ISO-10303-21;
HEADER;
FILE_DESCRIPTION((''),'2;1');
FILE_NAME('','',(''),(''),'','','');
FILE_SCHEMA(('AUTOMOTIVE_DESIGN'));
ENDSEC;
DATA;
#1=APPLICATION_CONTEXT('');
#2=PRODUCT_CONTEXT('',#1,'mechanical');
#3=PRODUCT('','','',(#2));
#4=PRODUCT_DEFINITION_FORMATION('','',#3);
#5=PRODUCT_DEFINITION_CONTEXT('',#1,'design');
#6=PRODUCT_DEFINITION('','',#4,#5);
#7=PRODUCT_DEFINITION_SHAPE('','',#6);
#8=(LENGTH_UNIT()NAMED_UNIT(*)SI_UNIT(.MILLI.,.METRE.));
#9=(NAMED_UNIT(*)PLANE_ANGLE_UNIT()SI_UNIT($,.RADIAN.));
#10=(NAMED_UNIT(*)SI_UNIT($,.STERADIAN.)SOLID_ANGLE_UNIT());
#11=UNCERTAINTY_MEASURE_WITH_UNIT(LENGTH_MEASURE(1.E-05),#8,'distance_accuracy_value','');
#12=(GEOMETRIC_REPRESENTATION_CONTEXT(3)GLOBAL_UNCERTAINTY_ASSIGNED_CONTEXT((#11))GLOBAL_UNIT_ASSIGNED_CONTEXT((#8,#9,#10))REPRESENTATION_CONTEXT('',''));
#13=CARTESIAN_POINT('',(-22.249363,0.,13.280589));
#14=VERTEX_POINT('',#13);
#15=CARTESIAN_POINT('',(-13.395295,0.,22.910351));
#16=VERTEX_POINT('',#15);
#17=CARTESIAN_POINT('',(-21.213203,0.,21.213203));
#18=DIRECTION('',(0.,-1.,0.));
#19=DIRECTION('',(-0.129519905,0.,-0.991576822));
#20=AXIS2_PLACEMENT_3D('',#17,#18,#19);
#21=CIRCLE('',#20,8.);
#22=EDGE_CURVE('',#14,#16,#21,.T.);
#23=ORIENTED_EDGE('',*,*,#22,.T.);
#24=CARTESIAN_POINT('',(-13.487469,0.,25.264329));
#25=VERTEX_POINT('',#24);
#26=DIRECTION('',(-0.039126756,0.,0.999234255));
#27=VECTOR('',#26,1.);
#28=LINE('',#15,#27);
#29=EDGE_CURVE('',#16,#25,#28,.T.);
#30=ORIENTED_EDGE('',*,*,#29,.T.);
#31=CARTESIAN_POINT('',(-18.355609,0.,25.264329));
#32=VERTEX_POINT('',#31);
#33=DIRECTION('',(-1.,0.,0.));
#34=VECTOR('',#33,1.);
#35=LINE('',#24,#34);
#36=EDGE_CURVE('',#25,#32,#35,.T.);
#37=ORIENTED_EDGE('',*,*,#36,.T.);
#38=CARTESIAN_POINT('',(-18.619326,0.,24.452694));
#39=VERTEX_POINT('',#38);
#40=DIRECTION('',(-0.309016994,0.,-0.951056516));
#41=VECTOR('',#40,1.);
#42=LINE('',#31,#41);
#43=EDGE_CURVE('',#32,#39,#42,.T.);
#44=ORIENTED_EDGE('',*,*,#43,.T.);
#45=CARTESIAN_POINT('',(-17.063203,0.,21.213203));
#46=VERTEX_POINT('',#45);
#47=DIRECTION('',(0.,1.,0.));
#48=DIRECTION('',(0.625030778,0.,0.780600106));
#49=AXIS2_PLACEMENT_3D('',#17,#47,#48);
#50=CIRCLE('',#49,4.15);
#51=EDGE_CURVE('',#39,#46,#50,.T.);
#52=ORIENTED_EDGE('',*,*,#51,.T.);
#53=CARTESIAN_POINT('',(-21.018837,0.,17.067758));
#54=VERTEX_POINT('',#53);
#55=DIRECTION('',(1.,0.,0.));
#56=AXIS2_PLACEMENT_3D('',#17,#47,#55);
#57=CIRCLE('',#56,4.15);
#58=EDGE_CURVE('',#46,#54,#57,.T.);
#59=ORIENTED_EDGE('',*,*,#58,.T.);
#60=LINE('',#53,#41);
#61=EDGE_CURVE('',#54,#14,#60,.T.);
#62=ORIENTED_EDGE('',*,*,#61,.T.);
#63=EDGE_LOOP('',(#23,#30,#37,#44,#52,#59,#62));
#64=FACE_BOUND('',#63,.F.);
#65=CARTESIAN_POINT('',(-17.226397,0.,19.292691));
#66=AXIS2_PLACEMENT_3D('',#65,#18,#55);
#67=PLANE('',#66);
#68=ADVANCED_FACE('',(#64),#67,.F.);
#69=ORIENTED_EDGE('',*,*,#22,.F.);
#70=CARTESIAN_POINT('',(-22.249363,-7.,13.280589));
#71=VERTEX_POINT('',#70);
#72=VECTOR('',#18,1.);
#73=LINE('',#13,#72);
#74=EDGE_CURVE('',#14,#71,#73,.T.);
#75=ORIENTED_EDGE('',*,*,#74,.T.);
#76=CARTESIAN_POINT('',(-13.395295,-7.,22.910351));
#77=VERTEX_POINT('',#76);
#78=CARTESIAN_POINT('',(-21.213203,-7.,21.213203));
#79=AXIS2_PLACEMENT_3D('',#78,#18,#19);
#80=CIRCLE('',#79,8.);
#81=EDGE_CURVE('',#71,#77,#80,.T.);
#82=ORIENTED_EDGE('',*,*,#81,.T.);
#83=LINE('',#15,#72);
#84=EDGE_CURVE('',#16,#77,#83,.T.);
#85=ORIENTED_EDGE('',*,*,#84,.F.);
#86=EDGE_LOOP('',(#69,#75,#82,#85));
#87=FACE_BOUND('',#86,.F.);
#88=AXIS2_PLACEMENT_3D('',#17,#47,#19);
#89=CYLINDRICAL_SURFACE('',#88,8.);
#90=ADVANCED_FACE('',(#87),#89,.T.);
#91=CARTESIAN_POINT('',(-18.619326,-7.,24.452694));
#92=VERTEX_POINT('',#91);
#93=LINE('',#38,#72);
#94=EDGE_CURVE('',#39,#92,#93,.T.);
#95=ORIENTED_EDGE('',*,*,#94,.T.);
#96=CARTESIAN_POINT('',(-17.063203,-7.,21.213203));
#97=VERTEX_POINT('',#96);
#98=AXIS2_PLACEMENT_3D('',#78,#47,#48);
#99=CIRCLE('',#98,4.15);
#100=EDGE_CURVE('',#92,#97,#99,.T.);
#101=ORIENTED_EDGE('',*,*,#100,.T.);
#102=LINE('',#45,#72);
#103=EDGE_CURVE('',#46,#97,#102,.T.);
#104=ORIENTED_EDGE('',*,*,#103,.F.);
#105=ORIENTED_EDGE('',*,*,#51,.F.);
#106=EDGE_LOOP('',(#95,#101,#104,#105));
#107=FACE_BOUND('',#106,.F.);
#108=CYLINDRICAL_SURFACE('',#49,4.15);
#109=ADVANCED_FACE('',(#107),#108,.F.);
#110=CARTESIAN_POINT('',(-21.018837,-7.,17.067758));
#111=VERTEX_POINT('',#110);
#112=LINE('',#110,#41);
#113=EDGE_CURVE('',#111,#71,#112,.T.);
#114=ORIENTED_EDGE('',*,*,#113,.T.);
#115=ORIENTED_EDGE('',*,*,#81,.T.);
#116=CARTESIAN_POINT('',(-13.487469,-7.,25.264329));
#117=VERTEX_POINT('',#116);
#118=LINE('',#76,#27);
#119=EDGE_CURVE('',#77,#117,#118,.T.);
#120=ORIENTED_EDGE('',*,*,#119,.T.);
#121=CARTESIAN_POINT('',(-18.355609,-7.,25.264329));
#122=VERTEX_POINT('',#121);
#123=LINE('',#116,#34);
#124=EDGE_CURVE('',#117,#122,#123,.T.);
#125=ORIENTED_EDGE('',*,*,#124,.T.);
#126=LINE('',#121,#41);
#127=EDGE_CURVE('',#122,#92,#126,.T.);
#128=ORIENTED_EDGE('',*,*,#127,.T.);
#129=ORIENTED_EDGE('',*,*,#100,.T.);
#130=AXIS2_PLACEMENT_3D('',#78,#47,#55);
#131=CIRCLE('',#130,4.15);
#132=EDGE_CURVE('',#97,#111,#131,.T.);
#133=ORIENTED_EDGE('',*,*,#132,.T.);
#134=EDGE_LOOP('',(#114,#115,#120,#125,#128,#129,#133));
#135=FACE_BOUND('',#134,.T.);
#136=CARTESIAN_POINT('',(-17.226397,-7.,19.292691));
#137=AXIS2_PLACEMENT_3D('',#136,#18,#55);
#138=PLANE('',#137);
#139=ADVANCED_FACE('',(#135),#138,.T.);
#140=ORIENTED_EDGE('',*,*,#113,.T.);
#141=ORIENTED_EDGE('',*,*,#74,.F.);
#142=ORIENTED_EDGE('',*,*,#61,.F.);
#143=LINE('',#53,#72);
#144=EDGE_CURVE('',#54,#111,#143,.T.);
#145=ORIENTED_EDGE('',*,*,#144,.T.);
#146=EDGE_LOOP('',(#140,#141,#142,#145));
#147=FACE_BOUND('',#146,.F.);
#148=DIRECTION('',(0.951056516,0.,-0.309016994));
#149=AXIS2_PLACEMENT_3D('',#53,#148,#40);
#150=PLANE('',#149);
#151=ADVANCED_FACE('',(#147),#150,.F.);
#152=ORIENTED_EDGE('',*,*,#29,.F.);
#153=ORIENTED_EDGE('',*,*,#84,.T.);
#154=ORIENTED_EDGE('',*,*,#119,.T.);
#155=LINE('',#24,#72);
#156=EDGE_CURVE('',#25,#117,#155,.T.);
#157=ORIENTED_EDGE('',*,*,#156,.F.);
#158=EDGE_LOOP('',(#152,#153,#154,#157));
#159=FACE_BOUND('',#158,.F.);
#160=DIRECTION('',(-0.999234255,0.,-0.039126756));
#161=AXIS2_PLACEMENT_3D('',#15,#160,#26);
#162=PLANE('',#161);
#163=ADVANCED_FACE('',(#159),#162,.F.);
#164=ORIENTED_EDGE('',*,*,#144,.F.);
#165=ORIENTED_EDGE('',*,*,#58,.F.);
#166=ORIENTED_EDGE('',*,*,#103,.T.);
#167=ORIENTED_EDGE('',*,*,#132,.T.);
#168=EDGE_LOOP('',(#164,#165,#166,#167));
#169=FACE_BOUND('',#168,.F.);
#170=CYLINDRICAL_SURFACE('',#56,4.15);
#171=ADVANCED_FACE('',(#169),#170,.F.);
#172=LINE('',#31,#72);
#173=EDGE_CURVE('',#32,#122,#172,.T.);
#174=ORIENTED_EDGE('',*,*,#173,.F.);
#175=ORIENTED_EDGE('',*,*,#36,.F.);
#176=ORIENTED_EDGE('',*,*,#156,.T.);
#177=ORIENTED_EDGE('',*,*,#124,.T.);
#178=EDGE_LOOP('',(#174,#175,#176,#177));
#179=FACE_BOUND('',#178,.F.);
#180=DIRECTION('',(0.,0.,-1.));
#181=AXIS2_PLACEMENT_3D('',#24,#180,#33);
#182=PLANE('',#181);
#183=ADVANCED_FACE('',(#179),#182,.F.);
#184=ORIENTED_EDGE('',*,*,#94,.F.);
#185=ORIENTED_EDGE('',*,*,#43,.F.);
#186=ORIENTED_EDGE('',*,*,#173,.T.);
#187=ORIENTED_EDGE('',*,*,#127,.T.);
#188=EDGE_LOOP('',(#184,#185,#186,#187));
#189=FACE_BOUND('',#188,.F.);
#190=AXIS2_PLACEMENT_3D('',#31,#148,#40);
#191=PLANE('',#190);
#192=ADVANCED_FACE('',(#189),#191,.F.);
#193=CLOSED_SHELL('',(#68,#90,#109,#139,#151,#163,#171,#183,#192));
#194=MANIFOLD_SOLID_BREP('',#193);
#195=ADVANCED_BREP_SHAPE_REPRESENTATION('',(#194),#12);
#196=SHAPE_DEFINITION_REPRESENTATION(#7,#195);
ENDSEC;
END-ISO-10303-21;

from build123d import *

# Parameters (mm, degrees)
F1_DEPTH = 7


with BuildPart() as f1:
    # F0 (on Front) → F1 (new body)
    with BuildSketch(Plane.XZ):
        with BuildLine():
            ThreePointArc((-18.6193257059, 24.4526938776), (-17.4724085616, 23.0101324022), (-17.0632034356, 21.2132034356))
            ThreePointArc((-17.0632034356, 21.2132034356), (-18.2107776829, 18.3482532441), (-21.0188369777, 17.0677575392))
            Line((-21.0188369777, 17.0677575392), (-22.249362675, 13.2805888584))
            ThreePointArc((-22.249362675, 13.2805888584), (-15.3241365798, 15.7985112404), (-13.3952950657, 22.9103506653))
            Line((-13.3952950657, 22.9103506653), (-13.4874691837, 25.2643290081))
            Line((-13.4874691837, 25.2643290081), (-18.3556094659, 25.2643290081))
            Line((-18.3556094659, 25.2643290081), (-18.6193257059, 24.4526938776))
        make_face()
    extrude(amount=F1_DEPTH)


solid = f1.part
